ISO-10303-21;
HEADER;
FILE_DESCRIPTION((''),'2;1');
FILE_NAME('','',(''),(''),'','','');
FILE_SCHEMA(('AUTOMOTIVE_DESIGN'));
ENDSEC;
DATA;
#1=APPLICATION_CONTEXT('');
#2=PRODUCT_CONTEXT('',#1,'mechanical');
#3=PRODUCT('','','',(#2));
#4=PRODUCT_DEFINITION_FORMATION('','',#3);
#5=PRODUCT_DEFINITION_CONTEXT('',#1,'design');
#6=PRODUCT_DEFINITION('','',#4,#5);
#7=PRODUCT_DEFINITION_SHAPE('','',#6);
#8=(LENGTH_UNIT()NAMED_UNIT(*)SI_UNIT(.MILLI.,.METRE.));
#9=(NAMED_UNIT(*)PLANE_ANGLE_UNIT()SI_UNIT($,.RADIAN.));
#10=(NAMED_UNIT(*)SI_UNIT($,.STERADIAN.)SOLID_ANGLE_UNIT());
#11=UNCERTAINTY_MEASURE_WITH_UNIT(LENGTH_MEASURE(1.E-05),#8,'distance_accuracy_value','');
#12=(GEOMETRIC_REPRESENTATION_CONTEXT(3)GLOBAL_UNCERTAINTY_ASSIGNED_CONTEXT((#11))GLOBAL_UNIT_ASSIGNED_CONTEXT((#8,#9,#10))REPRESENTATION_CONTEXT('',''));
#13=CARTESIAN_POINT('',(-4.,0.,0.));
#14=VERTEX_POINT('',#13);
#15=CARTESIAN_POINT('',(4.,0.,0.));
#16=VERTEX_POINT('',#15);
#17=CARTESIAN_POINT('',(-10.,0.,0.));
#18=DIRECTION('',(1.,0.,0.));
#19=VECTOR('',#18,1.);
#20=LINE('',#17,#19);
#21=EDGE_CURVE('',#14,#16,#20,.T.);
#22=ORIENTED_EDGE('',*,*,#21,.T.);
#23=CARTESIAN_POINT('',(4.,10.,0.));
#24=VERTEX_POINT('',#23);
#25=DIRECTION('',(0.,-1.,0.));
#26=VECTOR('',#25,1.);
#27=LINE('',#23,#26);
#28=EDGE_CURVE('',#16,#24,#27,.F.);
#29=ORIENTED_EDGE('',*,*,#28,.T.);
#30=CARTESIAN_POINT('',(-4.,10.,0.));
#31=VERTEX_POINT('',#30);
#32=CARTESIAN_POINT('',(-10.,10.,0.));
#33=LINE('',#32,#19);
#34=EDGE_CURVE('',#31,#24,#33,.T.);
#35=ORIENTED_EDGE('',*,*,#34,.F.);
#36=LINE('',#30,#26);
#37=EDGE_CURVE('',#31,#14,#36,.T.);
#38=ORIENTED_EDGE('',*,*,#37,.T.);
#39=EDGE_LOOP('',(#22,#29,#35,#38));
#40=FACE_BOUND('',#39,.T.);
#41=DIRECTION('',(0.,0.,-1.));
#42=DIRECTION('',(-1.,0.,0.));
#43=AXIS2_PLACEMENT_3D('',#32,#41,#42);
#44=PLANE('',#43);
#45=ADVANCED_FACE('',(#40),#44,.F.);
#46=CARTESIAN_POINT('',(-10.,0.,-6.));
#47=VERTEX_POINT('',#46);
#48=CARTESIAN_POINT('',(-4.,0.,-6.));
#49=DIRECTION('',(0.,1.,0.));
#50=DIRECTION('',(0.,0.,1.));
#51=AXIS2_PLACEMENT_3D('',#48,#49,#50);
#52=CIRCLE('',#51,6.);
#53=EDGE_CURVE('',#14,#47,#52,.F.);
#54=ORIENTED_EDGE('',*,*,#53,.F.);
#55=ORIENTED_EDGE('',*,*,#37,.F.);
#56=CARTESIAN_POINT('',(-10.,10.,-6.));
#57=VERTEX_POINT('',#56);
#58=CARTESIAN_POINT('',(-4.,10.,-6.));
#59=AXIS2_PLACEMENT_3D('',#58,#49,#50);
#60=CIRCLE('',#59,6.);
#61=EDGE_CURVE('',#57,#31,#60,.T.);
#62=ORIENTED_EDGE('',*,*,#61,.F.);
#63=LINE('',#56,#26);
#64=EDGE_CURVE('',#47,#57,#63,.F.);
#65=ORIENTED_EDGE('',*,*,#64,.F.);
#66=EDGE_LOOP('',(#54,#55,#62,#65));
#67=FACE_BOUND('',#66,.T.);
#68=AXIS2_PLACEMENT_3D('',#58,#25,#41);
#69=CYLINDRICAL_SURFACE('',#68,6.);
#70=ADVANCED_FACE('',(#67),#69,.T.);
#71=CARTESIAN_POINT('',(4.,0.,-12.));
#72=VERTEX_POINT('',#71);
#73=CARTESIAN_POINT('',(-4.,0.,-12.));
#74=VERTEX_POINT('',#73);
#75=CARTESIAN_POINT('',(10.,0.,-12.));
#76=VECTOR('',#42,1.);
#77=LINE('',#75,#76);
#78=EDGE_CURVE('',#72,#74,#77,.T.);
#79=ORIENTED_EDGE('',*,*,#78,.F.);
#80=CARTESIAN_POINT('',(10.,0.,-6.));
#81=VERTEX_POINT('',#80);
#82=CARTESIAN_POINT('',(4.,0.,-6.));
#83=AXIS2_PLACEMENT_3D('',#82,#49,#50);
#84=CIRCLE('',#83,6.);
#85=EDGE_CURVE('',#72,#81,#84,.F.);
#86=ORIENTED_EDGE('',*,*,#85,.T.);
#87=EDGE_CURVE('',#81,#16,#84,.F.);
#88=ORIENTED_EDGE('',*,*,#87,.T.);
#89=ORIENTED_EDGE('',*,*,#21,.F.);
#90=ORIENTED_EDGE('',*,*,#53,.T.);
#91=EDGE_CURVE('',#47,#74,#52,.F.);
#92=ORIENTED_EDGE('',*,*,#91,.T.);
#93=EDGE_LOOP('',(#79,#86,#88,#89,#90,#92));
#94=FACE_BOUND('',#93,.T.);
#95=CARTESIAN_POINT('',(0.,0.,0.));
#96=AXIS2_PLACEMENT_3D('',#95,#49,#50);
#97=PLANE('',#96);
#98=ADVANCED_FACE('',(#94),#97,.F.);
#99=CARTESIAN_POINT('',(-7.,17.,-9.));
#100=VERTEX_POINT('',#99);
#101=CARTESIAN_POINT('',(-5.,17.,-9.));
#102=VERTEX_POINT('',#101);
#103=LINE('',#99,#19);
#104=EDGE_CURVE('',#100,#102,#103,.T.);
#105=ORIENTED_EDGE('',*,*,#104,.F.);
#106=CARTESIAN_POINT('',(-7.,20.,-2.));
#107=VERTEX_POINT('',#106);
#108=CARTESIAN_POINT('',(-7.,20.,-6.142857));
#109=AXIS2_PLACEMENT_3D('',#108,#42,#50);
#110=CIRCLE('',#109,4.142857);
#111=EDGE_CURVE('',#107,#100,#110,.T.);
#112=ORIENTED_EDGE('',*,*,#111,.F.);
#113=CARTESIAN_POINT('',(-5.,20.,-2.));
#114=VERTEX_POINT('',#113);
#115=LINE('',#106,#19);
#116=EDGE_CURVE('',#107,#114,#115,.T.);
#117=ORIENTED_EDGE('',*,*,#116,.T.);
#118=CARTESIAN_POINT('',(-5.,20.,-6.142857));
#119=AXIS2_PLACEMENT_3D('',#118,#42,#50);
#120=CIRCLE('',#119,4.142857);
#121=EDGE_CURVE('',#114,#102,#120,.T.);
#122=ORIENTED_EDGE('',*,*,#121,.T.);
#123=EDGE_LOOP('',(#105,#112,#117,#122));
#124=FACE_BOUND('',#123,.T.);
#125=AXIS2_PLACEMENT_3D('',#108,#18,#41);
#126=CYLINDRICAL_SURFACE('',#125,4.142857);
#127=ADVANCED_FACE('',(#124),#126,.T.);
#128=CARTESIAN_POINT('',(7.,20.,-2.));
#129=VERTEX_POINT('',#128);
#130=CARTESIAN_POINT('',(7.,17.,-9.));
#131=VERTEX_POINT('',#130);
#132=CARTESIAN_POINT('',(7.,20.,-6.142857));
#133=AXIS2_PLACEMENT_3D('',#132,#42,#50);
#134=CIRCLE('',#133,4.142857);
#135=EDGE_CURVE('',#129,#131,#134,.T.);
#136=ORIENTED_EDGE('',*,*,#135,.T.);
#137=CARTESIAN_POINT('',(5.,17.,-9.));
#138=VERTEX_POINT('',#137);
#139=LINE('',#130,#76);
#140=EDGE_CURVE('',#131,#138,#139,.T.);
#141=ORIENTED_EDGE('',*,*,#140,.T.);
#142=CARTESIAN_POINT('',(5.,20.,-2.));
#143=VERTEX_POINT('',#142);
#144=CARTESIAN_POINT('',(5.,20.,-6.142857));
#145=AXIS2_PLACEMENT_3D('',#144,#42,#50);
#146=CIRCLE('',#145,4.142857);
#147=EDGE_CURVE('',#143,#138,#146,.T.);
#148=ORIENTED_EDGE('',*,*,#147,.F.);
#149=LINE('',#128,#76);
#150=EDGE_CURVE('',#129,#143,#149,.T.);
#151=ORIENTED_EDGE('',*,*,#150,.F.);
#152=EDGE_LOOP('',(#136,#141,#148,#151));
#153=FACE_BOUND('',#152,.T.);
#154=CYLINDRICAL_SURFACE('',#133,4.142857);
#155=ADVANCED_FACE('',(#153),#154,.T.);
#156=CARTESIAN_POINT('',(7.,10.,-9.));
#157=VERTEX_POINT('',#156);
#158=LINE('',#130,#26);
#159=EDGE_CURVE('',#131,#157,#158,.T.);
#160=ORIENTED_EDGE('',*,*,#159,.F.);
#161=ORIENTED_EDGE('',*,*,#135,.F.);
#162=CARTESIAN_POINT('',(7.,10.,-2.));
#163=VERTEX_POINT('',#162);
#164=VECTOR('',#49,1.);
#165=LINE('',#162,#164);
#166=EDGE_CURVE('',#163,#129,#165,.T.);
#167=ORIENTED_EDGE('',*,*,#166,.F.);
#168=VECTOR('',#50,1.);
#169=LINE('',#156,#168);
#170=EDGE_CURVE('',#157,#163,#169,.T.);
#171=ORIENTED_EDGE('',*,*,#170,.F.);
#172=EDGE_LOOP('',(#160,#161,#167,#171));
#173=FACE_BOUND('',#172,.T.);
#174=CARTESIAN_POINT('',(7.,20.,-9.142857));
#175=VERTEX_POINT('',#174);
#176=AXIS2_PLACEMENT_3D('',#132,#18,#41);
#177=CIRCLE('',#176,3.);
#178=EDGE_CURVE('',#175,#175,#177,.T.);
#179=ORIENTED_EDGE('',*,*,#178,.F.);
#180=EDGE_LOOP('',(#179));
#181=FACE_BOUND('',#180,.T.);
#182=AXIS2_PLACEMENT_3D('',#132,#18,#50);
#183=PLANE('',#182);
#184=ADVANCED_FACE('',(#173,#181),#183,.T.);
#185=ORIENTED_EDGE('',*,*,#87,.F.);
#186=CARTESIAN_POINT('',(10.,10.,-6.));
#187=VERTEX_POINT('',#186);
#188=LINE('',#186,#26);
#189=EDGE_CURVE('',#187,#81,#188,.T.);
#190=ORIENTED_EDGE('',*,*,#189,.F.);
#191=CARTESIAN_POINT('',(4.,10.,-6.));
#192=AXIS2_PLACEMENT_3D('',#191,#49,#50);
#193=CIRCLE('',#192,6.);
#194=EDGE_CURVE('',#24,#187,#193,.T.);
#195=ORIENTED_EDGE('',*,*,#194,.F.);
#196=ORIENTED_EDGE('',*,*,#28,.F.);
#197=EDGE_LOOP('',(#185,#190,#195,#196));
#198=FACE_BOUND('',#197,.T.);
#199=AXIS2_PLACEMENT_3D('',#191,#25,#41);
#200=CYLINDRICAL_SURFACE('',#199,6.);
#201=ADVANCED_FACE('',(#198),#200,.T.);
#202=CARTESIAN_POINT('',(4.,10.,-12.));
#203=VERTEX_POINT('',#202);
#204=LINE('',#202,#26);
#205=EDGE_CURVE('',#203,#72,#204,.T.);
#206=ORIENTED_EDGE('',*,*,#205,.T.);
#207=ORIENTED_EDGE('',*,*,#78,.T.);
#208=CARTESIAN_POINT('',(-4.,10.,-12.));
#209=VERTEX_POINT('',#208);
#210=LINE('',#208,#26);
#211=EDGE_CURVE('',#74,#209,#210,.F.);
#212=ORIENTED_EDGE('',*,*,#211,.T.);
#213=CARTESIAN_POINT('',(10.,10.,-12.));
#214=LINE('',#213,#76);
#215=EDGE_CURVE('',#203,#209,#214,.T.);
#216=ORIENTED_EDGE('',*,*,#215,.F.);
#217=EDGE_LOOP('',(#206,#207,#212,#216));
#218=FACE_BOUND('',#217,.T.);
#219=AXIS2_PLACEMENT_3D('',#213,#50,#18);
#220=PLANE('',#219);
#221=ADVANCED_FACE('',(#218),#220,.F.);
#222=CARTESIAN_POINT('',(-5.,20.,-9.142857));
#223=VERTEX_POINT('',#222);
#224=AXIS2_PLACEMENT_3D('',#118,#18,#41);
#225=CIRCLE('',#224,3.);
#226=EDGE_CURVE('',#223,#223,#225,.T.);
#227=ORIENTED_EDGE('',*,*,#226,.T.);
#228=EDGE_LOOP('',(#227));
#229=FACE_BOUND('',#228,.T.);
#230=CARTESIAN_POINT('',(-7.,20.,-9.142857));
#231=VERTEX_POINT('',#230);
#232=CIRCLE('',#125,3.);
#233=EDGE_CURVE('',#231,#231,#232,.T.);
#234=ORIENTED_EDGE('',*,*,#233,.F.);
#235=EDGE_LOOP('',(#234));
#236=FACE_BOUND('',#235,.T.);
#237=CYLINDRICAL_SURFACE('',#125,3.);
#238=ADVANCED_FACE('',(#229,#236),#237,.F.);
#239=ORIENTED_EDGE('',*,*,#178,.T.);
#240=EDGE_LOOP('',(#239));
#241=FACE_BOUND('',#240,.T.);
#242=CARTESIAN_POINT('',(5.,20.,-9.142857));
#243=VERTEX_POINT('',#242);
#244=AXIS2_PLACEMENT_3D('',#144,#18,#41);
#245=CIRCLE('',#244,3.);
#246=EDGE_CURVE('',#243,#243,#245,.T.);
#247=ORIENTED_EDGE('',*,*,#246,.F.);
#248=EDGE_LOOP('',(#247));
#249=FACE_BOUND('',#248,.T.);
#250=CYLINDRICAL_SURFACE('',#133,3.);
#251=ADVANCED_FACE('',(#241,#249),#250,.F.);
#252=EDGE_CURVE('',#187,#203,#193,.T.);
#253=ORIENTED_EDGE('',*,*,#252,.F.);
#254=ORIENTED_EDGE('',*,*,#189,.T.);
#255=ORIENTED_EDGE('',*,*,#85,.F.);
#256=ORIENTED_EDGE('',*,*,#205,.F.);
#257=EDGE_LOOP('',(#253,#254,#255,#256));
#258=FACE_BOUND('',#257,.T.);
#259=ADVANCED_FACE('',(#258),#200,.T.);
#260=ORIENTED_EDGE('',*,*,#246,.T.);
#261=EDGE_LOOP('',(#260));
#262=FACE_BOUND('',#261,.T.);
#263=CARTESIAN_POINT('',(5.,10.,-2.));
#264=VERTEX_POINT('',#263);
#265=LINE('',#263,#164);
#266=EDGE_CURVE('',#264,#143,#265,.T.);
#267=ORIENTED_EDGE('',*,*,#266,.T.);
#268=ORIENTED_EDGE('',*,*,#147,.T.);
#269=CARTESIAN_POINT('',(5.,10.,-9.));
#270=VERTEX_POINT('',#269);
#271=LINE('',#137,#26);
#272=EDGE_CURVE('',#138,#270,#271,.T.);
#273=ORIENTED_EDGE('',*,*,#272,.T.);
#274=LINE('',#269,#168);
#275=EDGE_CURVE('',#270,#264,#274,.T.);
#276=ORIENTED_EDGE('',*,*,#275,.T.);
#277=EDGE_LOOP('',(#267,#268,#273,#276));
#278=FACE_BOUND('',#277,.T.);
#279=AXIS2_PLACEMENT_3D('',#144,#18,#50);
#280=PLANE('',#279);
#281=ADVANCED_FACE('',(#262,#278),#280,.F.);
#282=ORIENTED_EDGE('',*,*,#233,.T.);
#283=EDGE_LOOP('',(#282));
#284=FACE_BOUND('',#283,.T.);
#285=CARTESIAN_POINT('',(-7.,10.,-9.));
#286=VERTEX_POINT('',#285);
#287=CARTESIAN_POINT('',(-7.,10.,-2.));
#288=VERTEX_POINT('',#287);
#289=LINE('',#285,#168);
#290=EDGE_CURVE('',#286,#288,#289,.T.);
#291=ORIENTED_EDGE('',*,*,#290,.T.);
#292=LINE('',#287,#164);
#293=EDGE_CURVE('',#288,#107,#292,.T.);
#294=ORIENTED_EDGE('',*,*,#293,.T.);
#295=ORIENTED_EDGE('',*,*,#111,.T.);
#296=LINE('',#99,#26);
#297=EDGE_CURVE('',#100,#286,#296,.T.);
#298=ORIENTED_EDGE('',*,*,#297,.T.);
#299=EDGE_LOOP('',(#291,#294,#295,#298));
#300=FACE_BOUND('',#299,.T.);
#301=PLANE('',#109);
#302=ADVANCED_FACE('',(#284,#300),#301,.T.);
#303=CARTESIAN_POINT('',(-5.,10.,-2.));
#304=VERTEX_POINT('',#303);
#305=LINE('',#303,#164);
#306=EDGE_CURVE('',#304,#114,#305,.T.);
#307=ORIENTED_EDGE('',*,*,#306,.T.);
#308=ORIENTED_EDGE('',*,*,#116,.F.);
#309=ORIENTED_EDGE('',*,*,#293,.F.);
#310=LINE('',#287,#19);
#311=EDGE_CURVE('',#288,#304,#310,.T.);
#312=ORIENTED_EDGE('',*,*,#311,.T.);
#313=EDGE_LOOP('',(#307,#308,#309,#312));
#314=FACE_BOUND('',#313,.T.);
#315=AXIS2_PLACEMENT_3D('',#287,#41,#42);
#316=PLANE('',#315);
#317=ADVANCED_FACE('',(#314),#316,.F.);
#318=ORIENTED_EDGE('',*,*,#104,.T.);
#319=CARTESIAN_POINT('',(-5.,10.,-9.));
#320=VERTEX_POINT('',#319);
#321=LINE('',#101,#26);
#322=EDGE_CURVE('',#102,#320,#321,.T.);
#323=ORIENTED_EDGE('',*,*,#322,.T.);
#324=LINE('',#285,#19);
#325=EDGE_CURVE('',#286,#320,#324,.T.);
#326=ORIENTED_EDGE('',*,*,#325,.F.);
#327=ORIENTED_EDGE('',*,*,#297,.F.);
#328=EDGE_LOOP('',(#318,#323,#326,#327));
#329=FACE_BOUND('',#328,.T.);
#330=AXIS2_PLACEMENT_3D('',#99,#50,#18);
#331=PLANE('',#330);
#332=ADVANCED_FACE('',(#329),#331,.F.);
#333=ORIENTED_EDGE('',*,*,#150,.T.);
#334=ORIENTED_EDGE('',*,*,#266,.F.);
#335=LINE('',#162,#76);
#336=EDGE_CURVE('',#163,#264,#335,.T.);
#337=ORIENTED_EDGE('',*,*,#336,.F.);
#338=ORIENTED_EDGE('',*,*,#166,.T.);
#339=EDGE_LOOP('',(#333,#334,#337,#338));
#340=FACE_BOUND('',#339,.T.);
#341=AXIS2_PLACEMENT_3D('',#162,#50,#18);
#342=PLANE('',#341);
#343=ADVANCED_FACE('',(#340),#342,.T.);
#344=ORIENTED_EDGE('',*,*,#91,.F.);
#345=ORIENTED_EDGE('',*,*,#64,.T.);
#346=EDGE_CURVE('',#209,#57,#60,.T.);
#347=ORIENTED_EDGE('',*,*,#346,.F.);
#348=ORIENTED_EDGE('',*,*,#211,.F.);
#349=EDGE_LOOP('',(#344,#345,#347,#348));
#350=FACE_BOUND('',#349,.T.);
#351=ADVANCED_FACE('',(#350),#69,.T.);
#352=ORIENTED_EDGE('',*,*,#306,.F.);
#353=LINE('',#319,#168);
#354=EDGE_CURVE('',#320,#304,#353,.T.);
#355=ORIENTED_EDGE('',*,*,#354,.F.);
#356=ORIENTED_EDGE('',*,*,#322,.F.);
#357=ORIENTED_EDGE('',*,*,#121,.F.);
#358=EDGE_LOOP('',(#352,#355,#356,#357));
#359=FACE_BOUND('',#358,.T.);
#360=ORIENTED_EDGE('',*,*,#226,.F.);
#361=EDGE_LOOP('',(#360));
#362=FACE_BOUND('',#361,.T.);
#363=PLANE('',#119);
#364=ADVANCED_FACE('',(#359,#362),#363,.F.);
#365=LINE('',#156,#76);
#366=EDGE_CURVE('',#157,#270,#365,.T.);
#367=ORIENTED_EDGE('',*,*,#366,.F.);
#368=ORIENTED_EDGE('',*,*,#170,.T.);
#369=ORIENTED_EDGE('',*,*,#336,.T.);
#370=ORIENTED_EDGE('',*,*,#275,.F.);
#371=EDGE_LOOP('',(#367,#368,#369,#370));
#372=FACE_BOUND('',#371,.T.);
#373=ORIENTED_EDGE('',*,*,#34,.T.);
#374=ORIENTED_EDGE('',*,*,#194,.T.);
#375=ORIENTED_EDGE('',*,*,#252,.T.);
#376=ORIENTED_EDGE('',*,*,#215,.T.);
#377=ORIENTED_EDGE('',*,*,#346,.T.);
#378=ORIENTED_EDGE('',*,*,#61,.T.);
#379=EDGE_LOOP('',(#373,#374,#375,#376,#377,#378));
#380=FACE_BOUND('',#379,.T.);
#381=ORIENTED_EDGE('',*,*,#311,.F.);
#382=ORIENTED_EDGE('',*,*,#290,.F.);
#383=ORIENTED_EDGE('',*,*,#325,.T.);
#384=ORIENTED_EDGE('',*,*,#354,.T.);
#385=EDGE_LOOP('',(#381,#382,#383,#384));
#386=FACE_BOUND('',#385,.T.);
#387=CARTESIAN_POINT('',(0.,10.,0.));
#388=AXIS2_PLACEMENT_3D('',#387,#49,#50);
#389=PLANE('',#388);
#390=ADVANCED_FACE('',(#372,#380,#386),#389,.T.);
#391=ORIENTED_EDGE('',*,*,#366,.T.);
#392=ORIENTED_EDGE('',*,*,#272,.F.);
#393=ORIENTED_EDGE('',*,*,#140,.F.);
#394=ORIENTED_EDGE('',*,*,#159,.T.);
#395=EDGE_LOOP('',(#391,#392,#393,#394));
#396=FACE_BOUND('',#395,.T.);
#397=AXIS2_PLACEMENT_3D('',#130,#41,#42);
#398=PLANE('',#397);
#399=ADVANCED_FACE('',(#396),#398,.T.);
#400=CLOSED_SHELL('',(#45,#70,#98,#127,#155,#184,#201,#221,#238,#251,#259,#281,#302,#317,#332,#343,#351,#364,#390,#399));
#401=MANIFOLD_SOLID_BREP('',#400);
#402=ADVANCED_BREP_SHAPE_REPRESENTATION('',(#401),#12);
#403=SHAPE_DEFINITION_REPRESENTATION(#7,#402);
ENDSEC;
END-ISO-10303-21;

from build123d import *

# Parameters (mm, degrees)
SKETCH1_W           = 20
SKETCH1_H           = 12
BOSS_EXTRUDE1_DEPTH = 10
SKETCH4_R           = 3
BOSS_EXTRUDE2_DEPTH = 1
FILLET1_R           = 6


with BuildPart() as part:
    # Sketch1 → Boss-Extrude1 (new body)
    with BuildSketch(Plane(origin=(0, 0, 0), x_dir=(1, 0, 0), z_dir=(0, 1, 0))):
        with Locations((0, 6)):
            Rectangle(SKETCH1_W, SKETCH1_H)
    extrude(amount=BOSS_EXTRUDE1_DEPTH)

    # Sketch4 → Boss-Extrude2 (add, symmetric)
    with BuildSketch(Plane(origin=(-6, 0, 0), x_dir=(0, 0, -1), z_dir=(1, 0, 0))):
        with BuildLine():
            Line((2, 10), (2, 20))
            ThreePointArc((2, 20), (7.774808523, 23.807886553), (9, 17))
            Line((9, 17), (9, 10))
            Line((9, 10), (2, 10))
        make_face()
        with Locations((6.142857143, 20)):
            Circle(SKETCH4_R, mode=Mode.SUBTRACT)
    boss_extrude2 = extrude(amount=BOSS_EXTRUDE2_DEPTH, both=True)

    # Mirror1: Boss-Extrude2 across plane
    add(boss_extrude2.mirror(Plane(origin=(0, 0, 0), x_dir=(0, 0, 1), z_dir=(1, 0, 0))))

    # Fillet1
    fillet1_edges = [part.edges().sort_by_distance(p)[0] for p in [
        (-10, 5, -12),
        (10, 5, -12),
        (10, 5, 0),
        (-10, 5, 0),
    ]]
    fillet(fillet1_edges, radius=FILLET1_R - 0.0001)  # a hair under: the kernel refuses the full size


solid = part.part
